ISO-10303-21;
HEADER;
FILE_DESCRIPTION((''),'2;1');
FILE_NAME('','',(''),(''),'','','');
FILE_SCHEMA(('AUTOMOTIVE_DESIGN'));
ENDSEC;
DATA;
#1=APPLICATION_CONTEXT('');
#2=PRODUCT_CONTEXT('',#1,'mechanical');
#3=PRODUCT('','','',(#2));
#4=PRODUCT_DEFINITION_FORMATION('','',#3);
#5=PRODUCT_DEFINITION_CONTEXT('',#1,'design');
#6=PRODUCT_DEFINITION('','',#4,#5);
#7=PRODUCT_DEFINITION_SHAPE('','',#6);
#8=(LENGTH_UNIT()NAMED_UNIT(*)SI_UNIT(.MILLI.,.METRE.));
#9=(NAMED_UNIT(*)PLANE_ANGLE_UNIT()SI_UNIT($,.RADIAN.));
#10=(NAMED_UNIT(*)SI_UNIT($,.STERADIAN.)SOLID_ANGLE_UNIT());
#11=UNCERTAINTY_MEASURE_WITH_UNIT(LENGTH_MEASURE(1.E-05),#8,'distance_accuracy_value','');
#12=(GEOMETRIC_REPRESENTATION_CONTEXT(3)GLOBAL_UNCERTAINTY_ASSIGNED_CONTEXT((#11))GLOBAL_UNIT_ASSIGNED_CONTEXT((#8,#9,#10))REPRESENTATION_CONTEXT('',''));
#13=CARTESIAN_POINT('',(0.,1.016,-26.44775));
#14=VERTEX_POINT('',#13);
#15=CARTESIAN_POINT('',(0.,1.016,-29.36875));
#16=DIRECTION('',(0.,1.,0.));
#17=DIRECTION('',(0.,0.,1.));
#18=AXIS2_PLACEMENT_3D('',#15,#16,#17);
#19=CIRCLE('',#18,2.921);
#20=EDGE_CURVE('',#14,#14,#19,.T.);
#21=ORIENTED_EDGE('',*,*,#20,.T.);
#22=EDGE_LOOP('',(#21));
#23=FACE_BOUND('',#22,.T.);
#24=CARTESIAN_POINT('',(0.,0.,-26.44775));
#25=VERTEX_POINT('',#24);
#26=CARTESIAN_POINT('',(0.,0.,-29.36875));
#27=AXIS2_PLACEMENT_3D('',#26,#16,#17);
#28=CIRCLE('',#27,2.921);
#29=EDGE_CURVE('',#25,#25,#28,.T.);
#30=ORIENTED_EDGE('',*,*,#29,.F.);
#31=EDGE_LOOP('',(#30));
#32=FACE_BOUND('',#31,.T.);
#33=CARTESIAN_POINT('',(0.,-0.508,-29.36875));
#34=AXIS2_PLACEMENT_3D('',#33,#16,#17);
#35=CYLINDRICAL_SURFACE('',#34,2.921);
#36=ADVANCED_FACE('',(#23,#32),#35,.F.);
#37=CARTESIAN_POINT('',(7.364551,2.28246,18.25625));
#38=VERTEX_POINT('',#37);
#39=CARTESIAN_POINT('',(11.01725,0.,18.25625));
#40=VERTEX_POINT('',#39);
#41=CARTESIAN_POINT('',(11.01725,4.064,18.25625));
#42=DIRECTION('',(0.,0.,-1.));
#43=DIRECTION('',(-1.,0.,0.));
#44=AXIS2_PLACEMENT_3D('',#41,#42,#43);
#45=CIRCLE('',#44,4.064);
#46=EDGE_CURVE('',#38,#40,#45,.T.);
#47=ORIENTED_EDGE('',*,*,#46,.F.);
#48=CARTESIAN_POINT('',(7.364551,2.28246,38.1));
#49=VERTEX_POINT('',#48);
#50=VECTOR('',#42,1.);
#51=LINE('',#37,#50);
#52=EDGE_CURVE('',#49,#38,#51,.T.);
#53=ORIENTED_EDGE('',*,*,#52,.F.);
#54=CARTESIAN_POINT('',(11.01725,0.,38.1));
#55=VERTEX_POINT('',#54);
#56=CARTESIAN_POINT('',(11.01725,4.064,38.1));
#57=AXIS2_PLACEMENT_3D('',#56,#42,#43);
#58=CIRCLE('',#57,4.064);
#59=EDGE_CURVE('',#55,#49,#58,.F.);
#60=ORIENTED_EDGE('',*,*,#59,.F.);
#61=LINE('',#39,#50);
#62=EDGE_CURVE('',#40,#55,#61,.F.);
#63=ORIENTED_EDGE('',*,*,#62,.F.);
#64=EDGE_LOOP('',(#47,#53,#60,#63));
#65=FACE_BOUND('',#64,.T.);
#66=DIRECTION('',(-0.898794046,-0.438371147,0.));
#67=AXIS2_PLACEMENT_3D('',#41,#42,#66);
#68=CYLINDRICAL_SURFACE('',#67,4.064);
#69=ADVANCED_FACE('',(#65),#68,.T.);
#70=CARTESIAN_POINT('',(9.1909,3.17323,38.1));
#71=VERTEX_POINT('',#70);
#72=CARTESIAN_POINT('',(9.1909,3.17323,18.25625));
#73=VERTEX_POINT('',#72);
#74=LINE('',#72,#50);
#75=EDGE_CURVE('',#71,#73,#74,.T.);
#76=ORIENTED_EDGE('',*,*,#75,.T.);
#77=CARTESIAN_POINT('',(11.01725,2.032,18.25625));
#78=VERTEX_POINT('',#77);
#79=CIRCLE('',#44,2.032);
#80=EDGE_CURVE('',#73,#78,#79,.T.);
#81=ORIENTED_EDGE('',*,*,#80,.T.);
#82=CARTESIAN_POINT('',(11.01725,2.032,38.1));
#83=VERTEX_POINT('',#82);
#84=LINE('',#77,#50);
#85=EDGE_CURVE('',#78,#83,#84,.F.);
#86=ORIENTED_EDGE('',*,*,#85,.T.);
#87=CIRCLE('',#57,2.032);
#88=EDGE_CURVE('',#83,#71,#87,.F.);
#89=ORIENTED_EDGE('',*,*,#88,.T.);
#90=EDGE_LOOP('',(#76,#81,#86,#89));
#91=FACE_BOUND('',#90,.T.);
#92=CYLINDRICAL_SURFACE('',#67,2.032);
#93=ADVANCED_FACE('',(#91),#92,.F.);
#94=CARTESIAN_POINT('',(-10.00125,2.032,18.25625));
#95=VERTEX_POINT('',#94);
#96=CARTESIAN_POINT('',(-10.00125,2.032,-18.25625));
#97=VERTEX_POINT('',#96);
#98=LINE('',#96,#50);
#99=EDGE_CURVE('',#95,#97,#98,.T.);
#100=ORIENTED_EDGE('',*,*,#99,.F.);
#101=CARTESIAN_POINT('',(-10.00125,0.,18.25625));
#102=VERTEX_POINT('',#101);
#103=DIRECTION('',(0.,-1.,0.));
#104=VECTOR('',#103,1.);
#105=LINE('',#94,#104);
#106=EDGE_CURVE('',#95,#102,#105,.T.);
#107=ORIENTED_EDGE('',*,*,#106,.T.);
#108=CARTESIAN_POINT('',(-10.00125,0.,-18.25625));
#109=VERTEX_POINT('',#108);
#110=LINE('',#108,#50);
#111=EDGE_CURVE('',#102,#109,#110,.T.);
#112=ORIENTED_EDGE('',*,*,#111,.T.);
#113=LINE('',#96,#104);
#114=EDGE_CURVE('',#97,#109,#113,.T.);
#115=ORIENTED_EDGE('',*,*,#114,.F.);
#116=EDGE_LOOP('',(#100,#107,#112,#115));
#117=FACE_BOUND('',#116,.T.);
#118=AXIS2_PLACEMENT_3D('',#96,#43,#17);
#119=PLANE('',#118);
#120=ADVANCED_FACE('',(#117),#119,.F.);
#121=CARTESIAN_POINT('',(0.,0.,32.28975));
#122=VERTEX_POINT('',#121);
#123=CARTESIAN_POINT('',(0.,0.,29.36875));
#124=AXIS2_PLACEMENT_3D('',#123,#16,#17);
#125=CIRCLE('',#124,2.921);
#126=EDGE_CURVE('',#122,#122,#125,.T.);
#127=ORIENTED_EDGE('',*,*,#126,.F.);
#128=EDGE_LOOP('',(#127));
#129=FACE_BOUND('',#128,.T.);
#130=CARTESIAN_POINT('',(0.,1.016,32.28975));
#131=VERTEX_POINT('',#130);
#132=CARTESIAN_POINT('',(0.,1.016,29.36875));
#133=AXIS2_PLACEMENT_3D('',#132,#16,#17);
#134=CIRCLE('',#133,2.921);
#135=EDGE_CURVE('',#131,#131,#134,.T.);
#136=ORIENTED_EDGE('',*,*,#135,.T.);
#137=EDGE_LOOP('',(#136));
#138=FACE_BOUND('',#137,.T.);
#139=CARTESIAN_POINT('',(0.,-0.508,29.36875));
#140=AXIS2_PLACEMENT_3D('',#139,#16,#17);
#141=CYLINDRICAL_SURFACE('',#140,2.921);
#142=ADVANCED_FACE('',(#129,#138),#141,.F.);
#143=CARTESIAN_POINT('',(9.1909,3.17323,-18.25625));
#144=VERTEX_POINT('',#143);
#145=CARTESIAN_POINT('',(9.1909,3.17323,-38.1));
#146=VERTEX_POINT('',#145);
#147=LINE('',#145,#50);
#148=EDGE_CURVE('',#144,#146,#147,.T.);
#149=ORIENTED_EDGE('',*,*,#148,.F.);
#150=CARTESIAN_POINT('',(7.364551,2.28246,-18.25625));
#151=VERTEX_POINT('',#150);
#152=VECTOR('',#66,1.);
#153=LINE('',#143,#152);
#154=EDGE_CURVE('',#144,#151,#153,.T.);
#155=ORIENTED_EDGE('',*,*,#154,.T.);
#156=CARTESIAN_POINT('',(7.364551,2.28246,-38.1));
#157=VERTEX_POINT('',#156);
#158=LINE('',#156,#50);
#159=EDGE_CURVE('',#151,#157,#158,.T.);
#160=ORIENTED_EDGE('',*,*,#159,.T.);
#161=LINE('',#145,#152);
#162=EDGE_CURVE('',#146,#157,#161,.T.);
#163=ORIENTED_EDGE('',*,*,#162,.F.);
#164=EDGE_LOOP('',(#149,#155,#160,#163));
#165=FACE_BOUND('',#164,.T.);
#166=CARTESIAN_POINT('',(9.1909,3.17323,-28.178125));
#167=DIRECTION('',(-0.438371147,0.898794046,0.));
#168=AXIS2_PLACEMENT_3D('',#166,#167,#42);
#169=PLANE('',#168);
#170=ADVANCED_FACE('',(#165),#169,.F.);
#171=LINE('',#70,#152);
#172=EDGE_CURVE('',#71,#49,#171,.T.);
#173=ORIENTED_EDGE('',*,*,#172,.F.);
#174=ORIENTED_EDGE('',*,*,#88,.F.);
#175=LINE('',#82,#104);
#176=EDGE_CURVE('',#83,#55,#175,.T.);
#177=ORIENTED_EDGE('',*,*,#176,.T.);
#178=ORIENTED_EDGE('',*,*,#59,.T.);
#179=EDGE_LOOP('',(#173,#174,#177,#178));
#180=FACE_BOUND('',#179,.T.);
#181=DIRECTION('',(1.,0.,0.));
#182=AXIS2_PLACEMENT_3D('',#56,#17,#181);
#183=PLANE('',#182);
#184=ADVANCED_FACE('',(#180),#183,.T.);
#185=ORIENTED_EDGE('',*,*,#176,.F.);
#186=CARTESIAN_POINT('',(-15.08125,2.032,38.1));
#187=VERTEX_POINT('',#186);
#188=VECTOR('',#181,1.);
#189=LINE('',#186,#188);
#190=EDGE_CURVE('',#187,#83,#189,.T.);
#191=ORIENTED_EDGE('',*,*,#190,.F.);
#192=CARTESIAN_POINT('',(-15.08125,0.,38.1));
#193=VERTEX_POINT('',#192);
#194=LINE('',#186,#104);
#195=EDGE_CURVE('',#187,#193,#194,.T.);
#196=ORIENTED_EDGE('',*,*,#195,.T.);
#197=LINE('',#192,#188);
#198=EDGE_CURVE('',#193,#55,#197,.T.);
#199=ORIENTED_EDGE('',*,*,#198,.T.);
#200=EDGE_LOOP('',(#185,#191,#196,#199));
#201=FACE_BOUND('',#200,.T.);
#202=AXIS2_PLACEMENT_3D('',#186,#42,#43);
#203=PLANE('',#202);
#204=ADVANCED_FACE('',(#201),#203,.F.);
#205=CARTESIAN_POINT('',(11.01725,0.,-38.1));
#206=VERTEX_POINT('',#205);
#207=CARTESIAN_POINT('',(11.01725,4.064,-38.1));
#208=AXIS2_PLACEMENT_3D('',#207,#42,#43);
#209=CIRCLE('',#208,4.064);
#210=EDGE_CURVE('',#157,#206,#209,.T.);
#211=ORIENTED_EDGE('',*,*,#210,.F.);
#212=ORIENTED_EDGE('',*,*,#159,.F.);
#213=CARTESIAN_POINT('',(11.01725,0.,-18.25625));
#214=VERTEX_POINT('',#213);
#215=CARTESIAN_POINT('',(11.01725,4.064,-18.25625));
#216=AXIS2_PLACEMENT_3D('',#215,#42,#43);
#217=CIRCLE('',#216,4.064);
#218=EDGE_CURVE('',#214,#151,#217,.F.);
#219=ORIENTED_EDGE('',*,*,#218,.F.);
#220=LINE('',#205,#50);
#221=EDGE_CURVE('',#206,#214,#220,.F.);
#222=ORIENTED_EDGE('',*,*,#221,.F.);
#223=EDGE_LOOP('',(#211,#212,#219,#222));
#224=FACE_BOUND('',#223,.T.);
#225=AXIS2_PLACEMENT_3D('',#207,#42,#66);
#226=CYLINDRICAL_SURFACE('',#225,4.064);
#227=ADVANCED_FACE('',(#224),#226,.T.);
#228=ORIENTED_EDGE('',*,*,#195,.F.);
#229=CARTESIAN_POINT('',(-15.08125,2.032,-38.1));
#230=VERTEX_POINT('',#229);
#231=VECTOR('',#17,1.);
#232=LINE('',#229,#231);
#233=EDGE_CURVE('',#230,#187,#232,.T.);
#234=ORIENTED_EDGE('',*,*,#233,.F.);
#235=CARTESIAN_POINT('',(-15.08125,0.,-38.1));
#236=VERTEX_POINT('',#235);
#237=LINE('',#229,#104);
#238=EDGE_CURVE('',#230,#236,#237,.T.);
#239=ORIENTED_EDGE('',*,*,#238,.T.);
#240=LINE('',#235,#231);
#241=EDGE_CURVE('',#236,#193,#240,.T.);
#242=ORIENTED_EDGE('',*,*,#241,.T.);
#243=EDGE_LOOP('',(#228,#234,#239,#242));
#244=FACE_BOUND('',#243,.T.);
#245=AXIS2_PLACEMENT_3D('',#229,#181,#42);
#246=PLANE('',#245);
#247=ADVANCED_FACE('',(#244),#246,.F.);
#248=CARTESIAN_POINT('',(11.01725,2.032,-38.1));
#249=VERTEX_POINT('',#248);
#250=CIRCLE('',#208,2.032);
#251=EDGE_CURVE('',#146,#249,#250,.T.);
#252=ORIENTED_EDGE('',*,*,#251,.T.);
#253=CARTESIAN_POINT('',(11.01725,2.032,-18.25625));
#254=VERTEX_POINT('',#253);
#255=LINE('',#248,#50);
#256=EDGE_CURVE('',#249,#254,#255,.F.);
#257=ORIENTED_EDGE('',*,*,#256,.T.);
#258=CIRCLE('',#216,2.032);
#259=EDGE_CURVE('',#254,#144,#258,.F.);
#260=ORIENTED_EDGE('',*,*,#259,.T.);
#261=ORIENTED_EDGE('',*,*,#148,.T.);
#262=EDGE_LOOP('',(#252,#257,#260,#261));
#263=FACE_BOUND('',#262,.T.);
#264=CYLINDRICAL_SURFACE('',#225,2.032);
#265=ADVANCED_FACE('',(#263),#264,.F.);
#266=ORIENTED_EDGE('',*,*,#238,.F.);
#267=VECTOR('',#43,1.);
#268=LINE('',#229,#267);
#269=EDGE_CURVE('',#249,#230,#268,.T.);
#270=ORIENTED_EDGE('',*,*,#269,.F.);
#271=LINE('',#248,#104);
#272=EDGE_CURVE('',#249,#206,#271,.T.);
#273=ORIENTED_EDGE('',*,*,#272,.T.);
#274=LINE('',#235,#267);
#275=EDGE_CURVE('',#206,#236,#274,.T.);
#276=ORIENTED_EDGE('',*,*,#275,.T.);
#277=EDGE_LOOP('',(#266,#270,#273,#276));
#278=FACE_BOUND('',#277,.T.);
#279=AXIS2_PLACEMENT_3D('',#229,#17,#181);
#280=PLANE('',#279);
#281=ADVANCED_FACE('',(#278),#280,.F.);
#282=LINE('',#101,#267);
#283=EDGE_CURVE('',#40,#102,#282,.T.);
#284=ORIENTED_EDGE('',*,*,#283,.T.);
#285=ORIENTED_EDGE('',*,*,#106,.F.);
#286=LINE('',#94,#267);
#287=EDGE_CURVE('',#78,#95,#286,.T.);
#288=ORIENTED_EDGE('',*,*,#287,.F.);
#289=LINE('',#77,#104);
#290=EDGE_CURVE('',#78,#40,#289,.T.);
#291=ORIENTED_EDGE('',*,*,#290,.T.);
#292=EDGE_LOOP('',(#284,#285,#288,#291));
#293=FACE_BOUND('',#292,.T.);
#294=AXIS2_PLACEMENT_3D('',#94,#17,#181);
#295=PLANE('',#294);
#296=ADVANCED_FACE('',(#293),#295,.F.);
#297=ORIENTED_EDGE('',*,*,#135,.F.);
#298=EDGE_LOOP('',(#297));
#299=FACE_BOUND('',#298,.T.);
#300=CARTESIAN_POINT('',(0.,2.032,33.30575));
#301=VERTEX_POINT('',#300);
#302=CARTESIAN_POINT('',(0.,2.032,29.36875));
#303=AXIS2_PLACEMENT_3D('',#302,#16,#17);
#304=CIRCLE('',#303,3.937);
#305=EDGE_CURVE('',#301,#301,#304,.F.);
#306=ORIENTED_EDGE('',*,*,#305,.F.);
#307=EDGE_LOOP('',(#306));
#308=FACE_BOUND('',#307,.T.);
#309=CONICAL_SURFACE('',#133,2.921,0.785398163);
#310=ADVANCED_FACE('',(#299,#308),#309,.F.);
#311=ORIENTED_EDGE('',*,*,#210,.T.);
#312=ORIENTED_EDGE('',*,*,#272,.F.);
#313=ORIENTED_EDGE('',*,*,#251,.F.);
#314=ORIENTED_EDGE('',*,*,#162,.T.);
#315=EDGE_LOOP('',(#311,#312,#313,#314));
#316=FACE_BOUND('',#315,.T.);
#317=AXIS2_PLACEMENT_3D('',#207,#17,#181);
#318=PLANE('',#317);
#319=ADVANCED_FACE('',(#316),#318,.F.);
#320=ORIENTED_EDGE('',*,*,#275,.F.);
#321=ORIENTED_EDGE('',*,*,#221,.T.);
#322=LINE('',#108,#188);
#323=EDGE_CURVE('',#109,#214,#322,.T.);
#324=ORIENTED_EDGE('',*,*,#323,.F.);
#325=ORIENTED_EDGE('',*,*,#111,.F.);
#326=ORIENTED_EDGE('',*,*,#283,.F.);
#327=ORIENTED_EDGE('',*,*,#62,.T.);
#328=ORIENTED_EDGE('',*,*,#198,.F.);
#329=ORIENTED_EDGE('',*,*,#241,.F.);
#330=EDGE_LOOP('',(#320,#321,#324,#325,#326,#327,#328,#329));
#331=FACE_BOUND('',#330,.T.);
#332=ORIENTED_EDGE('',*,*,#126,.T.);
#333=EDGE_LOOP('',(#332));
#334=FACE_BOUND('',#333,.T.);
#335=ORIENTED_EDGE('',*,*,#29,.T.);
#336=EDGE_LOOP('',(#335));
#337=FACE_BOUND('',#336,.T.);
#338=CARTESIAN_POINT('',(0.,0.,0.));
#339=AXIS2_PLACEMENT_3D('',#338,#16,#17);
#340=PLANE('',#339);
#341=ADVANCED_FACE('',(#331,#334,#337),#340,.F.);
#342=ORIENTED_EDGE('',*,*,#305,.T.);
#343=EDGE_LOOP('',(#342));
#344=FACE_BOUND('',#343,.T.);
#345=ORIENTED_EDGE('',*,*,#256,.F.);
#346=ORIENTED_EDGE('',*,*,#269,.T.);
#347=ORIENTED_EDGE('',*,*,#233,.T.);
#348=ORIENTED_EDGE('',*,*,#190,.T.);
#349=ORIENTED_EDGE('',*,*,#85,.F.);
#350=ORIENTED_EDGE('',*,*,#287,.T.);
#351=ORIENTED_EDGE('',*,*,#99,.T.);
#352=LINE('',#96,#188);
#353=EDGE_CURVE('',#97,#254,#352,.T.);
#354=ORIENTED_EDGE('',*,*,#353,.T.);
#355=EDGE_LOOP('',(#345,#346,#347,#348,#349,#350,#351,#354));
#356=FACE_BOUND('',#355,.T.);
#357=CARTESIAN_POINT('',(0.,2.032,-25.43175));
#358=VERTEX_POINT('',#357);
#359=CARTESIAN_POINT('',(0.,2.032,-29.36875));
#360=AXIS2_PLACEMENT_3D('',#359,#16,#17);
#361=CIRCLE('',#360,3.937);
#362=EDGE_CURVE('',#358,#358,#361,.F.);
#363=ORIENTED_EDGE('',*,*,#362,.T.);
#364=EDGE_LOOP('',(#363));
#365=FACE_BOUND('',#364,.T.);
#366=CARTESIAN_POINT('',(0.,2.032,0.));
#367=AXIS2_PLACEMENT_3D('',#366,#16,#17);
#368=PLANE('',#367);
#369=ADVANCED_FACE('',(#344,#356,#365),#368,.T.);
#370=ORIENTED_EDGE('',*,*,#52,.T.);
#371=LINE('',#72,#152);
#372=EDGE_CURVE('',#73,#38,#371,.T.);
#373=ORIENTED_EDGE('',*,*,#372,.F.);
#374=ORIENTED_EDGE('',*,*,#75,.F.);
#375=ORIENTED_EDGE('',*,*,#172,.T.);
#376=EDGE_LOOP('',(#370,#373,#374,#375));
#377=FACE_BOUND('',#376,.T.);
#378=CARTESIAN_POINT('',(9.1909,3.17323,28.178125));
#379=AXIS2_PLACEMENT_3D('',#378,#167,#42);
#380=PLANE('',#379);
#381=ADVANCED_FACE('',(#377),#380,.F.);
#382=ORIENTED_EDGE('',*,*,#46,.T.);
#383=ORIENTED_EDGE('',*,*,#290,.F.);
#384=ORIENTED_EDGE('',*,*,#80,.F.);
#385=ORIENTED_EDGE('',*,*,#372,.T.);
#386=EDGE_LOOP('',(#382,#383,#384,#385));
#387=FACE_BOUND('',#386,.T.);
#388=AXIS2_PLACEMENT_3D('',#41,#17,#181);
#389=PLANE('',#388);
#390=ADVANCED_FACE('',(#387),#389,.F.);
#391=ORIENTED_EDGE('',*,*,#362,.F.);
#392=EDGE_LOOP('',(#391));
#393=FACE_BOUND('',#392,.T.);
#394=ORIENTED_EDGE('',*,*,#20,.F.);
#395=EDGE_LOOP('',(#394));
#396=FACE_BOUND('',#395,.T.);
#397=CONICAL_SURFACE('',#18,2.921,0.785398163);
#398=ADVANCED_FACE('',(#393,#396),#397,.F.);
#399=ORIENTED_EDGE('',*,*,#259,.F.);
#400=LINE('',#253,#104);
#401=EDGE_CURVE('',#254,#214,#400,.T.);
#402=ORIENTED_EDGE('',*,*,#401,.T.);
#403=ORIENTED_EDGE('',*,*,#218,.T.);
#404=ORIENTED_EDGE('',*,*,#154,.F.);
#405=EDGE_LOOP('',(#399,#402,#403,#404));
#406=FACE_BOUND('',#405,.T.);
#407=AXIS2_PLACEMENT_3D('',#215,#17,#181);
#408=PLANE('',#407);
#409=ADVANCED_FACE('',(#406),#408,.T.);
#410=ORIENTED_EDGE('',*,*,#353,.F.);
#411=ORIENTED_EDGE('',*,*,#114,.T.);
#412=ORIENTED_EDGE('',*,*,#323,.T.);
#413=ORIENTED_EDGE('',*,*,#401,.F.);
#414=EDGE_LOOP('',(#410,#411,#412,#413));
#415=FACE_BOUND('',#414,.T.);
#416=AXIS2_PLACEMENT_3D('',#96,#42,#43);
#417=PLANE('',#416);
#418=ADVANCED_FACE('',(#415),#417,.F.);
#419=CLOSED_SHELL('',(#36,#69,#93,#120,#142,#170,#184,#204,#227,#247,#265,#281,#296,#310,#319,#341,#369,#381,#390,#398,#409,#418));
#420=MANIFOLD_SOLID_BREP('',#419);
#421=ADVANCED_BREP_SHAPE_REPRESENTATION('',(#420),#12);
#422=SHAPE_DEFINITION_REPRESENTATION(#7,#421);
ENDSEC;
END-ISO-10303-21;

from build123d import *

# Parameters (mm, degrees)
BASE_FLANGE1_DEPTH = 2.032
SKETCH6_R          = 2.921
CUT_EXTRUDE1_DEPTH = 2.54
HEM1_START         = -38.1
HEM1_DEPTH         = 76.2
HEM1_2_DEPTH       = 19.84375
HEM1_START_2       = 18.25625
HEM1_3_DEPTH       = 19.84375
CHAMFER2_SIZE      = 1.016


# Read off the part's stored shape, not the designer's step: Hem1
# Sheet-metal steps are written as plain solids
with BuildPart() as part:
    # Sketch1 → Base-Flange1 (new body)
    with BuildSketch(Plane(origin=(0, 0, 0), x_dir=(1, 0, 0), z_dir=(0, 1, 0))):
        Polygon((-15.08125, 38.1), (15.08125, 38.1), (15.08125, 18.25625), (-10.00125, 18.25625), (-10.00125, -18.25625), (15.08125, -18.25625), (15.08125, -38.1), (-15.08125, -38.1), align=None)
    extrude(amount=BASE_FLANGE1_DEPTH)

    # Sketch6 → Cut-Extrude1 (cut)
    with BuildSketch(Plane(origin=(0, 2.032, 0), x_dir=(1, 0, 0), z_dir=(0, 1, 0))):
        with Locations(Location((0, 29.36875, 0), (0, 0, 270))):
            Circle(SKETCH6_R)
        with Locations(Location((0, -29.36875, 0), (0, 0, 270))):
            Circle(SKETCH6_R)
    extrude(amount=-CUT_EXTRUDE1_DEPTH, mode=Mode.SUBTRACT)

    # Hem1 outline → Hem1 (cut)
    with BuildSketch(Plane.XY.offset(HEM1_START)):
        with BuildLine():
            Line((15.08125, 2.032), (14.536777241, 2.032))
            ThreePointArc((14.536777241, 2.032), (13.04925, 0.544472759), (11.01725, 0))
            Line((11.01725, 0), (15.08125, 0))
            Line((15.08125, 0), (15.08125, 2.032))
        make_face()
    extrude(amount=HEM1_DEPTH, mode=Mode.SUBTRACT)

    # Hem1 2 outline → Hem1 2 (add)
    with BuildSketch(Plane.XY.offset(HEM1_START)):
        with BuildLine():
            Line((7.364550996, 2.282459659), (9.190900498, 3.17322983))
            ThreePointArc((9.190900498, 3.17322983), (12.094045945, 5.787233731), (11.01725, 2.032))
            Line((11.01725, 2.032), (14.536777241, 2.032))
            ThreePointArc((14.536777241, 2.032), (11.159081554, 8.125524321), (7.364550996, 2.282459659))
        make_face()
    extrude(amount=HEM1_2_DEPTH)

    # Hem1 3 outline → Hem1 3 (add)
    with BuildSketch(Plane.XY.offset(HEM1_START_2)):
        with BuildLine():
            Line((7.364550996, 2.282459659), (9.190900498, 3.17322983))
            ThreePointArc((9.190900498, 3.17322983), (12.094045945, 5.787233731), (11.01725, 2.032))
            Line((11.01725, 2.032), (14.536777241, 2.032))
            ThreePointArc((14.536777241, 2.032), (11.159081554, 8.125524321), (7.364550996, 2.282459659))
        make_face()
    extrude(amount=HEM1_3_DEPTH)

    # Chamfer2
    chamfer2_edges = [part.edges().sort_by_distance(p)[0] for p in [
        (0, 2.032, -32.28975),
        (0, 2.032, 26.44775),
    ]]
    chamfer(chamfer2_edges, length=CHAMFER2_SIZE)


solid = part.part
